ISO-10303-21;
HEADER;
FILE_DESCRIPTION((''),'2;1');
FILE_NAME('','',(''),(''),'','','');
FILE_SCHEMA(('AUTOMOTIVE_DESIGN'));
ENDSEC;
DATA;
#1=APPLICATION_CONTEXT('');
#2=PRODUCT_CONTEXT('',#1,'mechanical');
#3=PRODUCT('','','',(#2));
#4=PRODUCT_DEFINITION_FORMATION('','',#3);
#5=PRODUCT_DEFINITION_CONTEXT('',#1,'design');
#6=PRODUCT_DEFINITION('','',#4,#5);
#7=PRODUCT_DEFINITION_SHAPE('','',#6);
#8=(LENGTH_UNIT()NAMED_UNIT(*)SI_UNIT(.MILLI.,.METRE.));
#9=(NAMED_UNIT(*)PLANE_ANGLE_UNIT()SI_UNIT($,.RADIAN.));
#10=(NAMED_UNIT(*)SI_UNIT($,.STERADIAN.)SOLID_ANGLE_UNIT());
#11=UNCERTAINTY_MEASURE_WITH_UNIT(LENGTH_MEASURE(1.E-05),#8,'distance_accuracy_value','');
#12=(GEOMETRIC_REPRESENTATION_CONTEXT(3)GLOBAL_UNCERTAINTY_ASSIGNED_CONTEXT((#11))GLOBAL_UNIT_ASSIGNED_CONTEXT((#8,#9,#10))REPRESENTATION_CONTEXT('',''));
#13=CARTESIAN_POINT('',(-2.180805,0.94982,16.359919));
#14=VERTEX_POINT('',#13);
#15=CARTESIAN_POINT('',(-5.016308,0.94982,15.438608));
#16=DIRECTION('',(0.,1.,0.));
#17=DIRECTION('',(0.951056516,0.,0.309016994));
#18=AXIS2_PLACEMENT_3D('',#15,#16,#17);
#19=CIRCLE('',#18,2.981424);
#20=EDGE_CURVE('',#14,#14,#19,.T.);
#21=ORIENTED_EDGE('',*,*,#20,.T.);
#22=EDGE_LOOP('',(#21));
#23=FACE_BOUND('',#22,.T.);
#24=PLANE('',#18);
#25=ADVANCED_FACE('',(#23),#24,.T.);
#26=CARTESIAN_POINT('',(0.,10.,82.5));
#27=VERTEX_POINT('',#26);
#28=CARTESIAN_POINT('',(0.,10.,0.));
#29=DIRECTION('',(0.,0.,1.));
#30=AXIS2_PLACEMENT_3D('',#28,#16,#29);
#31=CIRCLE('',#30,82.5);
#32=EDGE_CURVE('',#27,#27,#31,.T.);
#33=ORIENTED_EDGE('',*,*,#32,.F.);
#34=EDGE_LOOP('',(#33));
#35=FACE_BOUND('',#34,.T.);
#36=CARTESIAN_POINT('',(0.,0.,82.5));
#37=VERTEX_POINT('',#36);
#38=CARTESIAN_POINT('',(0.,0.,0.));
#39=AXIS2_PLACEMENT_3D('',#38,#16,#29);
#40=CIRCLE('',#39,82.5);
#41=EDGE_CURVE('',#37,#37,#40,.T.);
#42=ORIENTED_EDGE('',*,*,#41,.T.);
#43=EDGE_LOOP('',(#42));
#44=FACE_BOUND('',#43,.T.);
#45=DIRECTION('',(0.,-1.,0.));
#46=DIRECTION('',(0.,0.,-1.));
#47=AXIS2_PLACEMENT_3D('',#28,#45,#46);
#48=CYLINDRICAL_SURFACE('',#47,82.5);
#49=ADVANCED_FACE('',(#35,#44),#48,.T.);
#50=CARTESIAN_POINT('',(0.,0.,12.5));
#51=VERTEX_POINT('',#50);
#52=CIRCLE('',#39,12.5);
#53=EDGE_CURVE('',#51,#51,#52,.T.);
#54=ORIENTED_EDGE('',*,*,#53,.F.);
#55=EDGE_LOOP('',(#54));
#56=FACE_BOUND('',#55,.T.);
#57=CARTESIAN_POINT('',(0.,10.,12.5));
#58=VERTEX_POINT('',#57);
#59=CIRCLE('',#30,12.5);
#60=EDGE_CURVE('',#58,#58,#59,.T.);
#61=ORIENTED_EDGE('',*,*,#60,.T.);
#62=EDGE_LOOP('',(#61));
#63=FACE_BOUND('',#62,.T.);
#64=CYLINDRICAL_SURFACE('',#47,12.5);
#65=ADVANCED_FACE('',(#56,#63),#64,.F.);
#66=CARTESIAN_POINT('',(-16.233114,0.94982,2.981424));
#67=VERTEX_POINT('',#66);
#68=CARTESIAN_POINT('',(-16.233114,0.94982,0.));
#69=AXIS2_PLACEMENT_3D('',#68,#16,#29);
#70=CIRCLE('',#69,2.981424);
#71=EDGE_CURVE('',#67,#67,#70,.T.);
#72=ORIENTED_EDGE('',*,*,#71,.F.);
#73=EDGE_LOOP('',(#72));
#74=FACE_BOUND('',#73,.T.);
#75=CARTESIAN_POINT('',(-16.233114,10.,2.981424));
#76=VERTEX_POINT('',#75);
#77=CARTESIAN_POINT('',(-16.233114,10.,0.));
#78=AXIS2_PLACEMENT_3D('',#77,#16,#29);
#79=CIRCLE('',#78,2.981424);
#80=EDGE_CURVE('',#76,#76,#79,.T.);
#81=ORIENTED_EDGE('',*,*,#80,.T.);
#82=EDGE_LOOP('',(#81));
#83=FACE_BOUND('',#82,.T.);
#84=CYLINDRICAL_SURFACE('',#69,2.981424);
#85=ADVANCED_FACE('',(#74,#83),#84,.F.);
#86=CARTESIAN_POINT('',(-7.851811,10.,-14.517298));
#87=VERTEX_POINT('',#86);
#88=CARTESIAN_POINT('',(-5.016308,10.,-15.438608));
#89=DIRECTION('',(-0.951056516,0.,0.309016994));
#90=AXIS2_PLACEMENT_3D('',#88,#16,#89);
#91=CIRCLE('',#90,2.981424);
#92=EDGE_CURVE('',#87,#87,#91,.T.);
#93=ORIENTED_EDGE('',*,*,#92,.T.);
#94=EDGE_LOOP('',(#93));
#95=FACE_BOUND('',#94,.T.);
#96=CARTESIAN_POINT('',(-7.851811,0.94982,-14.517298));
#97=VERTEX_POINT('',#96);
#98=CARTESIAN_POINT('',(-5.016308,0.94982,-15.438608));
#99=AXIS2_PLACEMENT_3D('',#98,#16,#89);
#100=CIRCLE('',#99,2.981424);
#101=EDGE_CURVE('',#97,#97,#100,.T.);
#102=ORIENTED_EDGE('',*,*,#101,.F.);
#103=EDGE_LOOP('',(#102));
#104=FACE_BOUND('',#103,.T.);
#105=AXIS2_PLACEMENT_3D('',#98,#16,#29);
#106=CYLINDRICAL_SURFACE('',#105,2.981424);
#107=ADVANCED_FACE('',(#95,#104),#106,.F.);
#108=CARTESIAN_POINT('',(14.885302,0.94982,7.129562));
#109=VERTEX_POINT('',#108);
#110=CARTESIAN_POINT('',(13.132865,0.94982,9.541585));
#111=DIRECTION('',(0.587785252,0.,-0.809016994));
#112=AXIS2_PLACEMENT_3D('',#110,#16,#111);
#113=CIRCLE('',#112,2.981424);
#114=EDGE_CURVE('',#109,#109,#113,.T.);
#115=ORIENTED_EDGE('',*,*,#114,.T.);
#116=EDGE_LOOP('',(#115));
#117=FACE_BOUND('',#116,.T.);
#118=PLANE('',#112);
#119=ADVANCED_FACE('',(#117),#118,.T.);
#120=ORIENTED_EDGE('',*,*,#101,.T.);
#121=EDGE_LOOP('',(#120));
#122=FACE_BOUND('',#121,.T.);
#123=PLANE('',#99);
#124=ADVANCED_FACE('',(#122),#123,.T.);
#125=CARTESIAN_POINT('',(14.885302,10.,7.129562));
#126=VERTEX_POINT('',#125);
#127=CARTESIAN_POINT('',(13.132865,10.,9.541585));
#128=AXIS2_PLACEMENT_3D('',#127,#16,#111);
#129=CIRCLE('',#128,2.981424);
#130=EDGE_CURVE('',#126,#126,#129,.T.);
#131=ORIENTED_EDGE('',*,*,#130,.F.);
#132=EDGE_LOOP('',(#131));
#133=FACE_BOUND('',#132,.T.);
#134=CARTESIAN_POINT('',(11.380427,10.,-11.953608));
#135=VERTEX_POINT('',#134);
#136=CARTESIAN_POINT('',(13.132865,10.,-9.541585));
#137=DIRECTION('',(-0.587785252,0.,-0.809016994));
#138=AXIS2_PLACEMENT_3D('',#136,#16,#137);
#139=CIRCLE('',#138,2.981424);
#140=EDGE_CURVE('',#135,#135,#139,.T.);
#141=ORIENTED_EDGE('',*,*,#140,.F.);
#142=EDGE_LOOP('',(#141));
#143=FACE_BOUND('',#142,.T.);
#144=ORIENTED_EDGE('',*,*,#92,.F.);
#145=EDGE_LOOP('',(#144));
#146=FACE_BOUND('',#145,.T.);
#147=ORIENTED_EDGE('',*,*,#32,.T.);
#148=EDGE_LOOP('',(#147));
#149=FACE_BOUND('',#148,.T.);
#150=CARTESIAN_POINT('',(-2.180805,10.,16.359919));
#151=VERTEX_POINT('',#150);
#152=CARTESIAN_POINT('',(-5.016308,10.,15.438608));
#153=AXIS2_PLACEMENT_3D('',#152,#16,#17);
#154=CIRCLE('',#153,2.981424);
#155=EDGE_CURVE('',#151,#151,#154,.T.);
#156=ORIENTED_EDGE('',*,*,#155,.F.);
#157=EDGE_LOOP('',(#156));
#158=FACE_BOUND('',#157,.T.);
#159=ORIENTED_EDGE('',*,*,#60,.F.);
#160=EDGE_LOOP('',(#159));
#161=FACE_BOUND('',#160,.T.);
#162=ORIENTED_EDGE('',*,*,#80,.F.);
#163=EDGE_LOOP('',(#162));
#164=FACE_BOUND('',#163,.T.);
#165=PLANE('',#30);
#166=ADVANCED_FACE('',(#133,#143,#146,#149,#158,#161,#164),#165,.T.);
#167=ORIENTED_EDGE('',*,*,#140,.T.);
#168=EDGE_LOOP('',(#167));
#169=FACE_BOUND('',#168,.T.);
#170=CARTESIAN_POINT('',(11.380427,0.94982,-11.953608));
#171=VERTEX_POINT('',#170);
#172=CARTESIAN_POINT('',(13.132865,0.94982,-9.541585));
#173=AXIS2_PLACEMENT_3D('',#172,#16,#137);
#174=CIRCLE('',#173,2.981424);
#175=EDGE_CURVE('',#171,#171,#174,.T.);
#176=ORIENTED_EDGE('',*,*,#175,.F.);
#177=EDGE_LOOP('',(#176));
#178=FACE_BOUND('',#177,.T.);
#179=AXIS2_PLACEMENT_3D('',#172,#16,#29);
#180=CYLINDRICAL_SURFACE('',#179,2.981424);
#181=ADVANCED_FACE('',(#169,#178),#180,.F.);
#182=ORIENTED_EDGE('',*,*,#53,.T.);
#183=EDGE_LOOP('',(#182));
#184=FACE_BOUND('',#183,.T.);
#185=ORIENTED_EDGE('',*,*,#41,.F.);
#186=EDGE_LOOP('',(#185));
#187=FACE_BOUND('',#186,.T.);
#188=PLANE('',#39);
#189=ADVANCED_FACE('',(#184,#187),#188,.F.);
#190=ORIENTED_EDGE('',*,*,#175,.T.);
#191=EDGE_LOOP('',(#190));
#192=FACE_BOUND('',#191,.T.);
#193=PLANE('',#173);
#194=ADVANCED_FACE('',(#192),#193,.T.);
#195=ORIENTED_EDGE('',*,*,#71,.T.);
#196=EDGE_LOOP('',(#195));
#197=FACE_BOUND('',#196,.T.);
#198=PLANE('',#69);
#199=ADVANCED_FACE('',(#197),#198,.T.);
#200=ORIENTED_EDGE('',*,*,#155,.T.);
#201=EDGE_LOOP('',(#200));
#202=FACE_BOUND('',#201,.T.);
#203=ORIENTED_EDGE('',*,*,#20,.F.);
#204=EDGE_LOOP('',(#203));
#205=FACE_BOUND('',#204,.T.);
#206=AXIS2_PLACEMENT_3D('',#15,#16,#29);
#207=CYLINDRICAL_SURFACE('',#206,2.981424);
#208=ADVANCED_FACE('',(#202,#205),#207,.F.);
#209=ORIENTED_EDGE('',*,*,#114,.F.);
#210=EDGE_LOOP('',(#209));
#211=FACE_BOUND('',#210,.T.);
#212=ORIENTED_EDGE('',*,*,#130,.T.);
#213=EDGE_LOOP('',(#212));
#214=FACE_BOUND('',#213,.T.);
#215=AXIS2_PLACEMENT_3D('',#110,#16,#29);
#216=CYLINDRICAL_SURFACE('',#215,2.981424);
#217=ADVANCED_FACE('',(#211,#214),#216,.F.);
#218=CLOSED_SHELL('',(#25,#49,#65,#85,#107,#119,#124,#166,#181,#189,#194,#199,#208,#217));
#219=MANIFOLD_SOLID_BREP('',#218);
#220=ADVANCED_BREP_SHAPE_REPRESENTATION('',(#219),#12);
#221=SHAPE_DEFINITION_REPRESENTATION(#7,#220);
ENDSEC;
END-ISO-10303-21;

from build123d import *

# Parameters (mm, degrees)
SKETCH1_R           = 82.5
BOSS_EXTRUDE1_DEPTH = 10
SKETCH2_R           = 12.5
CUT_EXTRUDE1_DEPTH  = 118.100384286
SKETCH3_R           = 2.981424368
CUT_EXTRUDE2_DEPTH  = 9.050179742
CIRPATTERN1_COUNT   = 5


with BuildPart() as part:
    # Sketch1 → Boss-Extrude1 (new body)
    with BuildSketch(Plane(origin=(0, 0, 0), x_dir=(1, 0, 0), z_dir=(0, 1, 0))):
        Circle(SKETCH1_R)
    extrude(amount=BOSS_EXTRUDE1_DEPTH)

    # Sketch2 → Cut-Extrude1 (cut, through all)
    with BuildSketch(Plane(origin=(0, 0, 0), x_dir=(1, 0, 0), z_dir=(0, 1, 0))):
        Circle(SKETCH2_R)
    extrude(amount=CUT_EXTRUDE1_DEPTH, mode=Mode.SUBTRACT)

    # Sketch3 → Cut-Extrude2 (cut)
    with BuildSketch(Plane(origin=(0, 10, 0), x_dir=(1, 0, 0), z_dir=(0, 1, 0))):
        with Locations((-16.233113514, 0)):
            Circle(SKETCH3_R)
    cut_extrude2 = extrude(amount=-CUT_EXTRUDE2_DEPTH, mode=Mode.SUBTRACT)

    # CirPattern1: Cut-Extrude2 ×5 about axis
    cirpattern1_axis = Axis((0, 0, 0), (0, 1, 0))
    for i in range(1, CIRPATTERN1_COUNT):
        add(cut_extrude2.rotate(cirpattern1_axis, i * 360 / CIRPATTERN1_COUNT), mode=Mode.SUBTRACT)


solid = part.part
